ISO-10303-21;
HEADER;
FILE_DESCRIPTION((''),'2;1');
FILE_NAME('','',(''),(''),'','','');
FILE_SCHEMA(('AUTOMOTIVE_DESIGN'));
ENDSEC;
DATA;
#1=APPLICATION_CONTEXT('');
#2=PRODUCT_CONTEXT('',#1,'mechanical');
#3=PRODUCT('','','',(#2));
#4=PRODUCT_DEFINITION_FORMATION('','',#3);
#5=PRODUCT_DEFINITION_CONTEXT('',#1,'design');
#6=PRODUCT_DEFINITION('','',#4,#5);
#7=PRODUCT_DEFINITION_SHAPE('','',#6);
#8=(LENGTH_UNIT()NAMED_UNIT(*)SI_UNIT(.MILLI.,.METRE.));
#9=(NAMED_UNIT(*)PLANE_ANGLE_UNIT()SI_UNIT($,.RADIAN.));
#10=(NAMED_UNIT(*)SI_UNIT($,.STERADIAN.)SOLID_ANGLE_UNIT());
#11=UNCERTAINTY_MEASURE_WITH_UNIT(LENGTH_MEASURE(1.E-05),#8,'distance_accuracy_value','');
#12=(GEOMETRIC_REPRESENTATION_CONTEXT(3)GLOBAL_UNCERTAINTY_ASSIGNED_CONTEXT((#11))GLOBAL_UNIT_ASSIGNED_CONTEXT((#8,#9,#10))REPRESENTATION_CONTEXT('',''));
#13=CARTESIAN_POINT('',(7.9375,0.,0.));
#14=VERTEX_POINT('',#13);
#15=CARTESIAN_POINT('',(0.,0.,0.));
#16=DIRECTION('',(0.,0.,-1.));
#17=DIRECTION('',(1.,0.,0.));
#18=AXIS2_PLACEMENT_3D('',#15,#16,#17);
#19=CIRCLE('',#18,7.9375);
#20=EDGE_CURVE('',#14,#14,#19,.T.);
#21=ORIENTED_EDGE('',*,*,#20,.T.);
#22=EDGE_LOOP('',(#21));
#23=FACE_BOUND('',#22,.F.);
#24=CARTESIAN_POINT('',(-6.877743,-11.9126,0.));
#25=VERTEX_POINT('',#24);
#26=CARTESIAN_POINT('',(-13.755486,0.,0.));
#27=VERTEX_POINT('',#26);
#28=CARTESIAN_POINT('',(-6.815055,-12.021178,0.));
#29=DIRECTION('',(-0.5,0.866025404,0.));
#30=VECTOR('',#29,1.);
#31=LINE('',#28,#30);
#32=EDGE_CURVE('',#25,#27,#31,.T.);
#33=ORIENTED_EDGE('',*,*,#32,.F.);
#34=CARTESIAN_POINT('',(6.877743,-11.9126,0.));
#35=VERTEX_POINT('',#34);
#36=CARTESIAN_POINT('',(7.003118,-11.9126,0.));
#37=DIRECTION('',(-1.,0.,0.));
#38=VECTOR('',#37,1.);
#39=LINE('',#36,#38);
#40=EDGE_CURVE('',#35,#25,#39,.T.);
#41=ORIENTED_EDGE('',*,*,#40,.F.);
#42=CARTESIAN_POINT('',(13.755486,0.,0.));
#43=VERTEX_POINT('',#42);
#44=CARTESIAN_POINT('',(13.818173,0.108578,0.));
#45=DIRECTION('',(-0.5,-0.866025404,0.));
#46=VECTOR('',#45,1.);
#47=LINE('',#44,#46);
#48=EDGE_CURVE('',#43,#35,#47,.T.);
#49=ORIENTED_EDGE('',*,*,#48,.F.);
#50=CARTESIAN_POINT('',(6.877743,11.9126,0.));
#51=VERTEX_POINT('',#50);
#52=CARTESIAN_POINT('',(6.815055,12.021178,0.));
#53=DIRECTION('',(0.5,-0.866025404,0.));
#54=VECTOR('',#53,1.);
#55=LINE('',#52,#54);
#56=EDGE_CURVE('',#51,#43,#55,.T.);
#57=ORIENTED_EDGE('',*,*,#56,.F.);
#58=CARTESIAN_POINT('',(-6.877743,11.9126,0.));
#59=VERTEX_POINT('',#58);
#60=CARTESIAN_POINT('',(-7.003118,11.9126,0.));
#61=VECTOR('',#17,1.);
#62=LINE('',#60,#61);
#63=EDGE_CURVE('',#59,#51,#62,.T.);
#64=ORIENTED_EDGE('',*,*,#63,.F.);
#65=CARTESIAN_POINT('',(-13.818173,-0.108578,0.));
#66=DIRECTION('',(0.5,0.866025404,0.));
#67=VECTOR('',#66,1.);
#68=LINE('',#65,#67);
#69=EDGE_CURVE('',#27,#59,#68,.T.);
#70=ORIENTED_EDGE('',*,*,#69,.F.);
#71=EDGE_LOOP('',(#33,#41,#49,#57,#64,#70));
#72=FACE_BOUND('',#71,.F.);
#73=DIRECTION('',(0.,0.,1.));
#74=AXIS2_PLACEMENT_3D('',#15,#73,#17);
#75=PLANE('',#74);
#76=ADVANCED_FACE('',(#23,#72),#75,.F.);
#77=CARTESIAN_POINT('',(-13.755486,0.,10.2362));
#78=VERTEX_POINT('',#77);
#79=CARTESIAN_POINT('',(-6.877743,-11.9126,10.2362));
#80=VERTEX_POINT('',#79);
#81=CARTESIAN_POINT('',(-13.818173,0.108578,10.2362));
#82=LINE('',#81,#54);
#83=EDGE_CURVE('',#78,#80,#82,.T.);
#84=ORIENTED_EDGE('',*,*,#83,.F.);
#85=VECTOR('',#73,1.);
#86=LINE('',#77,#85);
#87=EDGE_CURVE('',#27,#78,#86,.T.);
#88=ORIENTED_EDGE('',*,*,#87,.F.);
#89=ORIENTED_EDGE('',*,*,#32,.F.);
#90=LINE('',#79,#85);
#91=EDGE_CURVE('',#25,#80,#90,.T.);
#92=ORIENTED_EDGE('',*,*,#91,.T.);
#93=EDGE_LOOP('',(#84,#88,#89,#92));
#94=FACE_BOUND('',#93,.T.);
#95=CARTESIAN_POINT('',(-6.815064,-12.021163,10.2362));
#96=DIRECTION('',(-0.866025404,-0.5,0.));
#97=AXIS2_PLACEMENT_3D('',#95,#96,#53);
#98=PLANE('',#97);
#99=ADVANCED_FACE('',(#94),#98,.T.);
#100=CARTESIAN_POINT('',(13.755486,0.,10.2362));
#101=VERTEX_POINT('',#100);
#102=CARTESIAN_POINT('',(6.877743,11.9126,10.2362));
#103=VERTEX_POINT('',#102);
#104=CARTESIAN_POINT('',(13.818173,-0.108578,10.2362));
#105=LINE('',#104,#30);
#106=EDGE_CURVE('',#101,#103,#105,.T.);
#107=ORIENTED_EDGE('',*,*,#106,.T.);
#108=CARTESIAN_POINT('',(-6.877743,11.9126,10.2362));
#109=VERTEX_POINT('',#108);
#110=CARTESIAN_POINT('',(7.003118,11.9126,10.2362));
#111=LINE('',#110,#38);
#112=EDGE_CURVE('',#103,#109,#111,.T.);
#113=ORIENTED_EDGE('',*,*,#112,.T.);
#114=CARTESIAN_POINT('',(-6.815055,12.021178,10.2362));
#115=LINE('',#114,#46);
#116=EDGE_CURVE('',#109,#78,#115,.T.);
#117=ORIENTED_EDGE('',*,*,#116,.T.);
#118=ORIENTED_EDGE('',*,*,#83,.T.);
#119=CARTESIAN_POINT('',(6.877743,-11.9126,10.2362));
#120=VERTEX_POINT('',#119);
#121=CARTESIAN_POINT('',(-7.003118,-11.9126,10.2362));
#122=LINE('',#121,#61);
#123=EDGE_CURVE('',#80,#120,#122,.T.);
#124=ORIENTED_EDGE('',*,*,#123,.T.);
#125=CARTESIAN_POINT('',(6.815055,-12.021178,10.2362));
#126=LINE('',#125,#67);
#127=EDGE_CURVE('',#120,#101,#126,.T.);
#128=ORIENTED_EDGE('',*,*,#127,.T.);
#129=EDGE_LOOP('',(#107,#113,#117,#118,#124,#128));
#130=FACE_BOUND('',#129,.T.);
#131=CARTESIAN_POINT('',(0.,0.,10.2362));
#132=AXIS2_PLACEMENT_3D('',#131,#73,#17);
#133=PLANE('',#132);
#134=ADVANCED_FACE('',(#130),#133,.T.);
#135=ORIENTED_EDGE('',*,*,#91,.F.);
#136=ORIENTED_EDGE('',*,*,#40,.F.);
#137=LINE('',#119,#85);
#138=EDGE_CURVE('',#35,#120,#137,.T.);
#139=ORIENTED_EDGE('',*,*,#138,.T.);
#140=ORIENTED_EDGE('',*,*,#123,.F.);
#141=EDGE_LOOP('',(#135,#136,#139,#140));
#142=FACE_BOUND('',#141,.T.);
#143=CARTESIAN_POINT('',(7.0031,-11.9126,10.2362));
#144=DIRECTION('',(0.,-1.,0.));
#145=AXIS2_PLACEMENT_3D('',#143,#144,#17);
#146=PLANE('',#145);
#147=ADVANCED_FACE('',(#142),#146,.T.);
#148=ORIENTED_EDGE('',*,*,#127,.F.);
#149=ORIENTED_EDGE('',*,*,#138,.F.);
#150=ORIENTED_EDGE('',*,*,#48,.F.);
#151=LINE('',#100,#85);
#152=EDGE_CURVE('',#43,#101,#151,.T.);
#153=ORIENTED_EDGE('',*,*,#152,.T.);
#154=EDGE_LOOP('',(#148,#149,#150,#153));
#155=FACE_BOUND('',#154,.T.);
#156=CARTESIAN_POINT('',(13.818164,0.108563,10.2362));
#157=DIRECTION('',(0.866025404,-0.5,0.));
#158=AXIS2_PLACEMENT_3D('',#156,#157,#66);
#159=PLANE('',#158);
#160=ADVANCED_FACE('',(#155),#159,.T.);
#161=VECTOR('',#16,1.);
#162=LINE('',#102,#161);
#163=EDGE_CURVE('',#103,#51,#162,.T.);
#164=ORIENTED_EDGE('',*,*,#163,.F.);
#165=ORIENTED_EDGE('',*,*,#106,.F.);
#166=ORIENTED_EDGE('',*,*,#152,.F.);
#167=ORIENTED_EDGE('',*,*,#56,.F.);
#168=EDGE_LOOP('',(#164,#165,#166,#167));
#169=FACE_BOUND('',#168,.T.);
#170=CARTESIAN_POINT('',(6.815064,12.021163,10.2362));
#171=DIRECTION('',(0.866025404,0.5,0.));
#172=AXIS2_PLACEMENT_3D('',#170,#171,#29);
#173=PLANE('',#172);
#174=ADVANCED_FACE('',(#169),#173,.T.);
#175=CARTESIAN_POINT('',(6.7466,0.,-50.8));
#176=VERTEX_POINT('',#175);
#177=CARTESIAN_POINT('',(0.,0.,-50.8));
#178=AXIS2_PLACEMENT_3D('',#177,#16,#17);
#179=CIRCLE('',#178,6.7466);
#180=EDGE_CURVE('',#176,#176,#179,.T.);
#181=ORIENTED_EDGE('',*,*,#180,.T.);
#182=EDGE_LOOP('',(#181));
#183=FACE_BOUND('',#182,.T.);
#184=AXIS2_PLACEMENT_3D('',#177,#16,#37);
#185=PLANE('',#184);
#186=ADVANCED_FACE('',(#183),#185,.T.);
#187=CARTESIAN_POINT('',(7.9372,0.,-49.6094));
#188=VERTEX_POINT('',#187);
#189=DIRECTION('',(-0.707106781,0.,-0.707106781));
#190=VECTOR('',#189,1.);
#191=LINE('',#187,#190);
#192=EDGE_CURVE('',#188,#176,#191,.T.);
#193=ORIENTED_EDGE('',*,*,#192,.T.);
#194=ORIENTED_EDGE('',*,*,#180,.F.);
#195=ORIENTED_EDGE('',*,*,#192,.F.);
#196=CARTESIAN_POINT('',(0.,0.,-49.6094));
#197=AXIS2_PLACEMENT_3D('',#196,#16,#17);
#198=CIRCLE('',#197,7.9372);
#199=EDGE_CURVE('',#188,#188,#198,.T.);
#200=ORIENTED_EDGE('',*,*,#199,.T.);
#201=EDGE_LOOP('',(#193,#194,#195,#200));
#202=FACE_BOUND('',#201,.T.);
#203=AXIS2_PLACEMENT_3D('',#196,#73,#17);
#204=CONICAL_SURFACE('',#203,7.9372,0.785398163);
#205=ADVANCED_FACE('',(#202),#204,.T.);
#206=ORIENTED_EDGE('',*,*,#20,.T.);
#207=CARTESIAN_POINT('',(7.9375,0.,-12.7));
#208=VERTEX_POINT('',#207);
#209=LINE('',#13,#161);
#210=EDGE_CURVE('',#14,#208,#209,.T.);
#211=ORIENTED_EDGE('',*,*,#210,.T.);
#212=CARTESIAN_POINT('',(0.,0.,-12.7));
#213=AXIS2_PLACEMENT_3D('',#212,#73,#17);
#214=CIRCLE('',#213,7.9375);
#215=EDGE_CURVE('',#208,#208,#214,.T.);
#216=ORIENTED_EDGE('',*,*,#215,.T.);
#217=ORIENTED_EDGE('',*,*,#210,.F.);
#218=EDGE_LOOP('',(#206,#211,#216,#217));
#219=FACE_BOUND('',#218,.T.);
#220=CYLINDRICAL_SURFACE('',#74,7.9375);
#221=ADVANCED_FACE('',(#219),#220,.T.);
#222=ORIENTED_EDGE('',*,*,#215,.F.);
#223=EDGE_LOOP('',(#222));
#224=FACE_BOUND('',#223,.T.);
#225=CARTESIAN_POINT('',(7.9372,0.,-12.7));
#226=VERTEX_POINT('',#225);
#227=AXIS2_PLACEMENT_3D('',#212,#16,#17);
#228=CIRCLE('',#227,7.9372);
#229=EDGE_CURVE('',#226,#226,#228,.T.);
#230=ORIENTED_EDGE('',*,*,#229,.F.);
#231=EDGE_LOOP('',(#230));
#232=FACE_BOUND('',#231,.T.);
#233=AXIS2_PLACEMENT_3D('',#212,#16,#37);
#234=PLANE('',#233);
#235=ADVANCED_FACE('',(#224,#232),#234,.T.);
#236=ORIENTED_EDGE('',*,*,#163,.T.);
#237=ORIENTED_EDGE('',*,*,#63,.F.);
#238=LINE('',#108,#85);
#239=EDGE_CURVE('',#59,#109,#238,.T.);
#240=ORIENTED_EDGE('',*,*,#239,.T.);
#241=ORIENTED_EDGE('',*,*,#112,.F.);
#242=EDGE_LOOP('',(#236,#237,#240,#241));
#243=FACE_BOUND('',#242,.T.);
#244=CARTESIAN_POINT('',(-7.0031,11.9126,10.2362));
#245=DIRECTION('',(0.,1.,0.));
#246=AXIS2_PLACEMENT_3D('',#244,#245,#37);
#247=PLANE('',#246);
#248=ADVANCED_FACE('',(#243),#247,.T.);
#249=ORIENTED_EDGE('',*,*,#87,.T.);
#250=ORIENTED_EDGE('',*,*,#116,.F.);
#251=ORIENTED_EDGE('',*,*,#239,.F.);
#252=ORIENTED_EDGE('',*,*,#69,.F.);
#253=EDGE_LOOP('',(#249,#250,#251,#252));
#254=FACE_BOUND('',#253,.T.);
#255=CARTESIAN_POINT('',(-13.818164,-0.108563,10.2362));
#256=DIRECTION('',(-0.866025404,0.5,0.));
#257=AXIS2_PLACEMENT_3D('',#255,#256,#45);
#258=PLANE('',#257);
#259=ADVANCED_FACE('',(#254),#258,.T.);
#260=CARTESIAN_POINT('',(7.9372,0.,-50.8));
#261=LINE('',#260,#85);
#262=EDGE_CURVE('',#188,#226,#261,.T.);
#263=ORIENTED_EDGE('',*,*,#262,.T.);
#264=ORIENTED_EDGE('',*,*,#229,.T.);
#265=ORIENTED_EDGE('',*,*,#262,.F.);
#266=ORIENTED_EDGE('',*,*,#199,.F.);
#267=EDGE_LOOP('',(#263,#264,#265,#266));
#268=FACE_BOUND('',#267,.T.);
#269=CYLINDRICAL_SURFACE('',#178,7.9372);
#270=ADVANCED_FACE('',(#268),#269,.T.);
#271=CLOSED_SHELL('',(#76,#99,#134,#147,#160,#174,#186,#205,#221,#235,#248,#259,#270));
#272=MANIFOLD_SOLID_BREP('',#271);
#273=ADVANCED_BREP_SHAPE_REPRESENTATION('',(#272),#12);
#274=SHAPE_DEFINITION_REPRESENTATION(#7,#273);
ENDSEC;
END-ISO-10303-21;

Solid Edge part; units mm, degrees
sketch "Sketch1" plane through (0, 0, 0) normal (0, 0, 1) x (1, 0, 0)
  circle A0 centre (0, 0) radius 13.8186
  dimension "D1" = 27.6372
extrude "Protrusion1" add sketch "Sketch1" along normal blind 10.2362
sketch "Sketch2" plane through (0, 0, 0) normal (0, 0, -1) x (1, 0, 0)
  circle A0 centre (0, 0) radius 7.9375
extrude "Protrusion2" add sketch "Sketch2" along normal blind 50.8
sketch "Sketch3" plane through (0, 0, -50.8) normal (0, 0, -1) x (1, 0, 0)
  circle A0 centre (0, 0) radius 7.9372
extrude "Cutout1" cut sketch "Sketch3" against normal blind 38.1 flip side to cut
chamfer "Chamfer_1" distance 1.1906 angle 45 1 edges at (-7.9372, 0, -50.8)
sketch "Sketch4" plane through (0, 0, 10.2362) normal (0, 0, 1) x (1, 0, 0)
  line L0 (-7.0031, 11.9126) -> (7.0031, 11.9126)
  dimension "D1" = 23.8252
extrude "Cutout2" cut sketch "Sketch4" against normal up to next material side at (0, 11.9626, 10.2362)
pattern_circular "Pattern1" count 6 over 360 about axis through (0, 0, 10.2362) along (0, 0, 1) of "Cutout2"
properties part number "24102224"
